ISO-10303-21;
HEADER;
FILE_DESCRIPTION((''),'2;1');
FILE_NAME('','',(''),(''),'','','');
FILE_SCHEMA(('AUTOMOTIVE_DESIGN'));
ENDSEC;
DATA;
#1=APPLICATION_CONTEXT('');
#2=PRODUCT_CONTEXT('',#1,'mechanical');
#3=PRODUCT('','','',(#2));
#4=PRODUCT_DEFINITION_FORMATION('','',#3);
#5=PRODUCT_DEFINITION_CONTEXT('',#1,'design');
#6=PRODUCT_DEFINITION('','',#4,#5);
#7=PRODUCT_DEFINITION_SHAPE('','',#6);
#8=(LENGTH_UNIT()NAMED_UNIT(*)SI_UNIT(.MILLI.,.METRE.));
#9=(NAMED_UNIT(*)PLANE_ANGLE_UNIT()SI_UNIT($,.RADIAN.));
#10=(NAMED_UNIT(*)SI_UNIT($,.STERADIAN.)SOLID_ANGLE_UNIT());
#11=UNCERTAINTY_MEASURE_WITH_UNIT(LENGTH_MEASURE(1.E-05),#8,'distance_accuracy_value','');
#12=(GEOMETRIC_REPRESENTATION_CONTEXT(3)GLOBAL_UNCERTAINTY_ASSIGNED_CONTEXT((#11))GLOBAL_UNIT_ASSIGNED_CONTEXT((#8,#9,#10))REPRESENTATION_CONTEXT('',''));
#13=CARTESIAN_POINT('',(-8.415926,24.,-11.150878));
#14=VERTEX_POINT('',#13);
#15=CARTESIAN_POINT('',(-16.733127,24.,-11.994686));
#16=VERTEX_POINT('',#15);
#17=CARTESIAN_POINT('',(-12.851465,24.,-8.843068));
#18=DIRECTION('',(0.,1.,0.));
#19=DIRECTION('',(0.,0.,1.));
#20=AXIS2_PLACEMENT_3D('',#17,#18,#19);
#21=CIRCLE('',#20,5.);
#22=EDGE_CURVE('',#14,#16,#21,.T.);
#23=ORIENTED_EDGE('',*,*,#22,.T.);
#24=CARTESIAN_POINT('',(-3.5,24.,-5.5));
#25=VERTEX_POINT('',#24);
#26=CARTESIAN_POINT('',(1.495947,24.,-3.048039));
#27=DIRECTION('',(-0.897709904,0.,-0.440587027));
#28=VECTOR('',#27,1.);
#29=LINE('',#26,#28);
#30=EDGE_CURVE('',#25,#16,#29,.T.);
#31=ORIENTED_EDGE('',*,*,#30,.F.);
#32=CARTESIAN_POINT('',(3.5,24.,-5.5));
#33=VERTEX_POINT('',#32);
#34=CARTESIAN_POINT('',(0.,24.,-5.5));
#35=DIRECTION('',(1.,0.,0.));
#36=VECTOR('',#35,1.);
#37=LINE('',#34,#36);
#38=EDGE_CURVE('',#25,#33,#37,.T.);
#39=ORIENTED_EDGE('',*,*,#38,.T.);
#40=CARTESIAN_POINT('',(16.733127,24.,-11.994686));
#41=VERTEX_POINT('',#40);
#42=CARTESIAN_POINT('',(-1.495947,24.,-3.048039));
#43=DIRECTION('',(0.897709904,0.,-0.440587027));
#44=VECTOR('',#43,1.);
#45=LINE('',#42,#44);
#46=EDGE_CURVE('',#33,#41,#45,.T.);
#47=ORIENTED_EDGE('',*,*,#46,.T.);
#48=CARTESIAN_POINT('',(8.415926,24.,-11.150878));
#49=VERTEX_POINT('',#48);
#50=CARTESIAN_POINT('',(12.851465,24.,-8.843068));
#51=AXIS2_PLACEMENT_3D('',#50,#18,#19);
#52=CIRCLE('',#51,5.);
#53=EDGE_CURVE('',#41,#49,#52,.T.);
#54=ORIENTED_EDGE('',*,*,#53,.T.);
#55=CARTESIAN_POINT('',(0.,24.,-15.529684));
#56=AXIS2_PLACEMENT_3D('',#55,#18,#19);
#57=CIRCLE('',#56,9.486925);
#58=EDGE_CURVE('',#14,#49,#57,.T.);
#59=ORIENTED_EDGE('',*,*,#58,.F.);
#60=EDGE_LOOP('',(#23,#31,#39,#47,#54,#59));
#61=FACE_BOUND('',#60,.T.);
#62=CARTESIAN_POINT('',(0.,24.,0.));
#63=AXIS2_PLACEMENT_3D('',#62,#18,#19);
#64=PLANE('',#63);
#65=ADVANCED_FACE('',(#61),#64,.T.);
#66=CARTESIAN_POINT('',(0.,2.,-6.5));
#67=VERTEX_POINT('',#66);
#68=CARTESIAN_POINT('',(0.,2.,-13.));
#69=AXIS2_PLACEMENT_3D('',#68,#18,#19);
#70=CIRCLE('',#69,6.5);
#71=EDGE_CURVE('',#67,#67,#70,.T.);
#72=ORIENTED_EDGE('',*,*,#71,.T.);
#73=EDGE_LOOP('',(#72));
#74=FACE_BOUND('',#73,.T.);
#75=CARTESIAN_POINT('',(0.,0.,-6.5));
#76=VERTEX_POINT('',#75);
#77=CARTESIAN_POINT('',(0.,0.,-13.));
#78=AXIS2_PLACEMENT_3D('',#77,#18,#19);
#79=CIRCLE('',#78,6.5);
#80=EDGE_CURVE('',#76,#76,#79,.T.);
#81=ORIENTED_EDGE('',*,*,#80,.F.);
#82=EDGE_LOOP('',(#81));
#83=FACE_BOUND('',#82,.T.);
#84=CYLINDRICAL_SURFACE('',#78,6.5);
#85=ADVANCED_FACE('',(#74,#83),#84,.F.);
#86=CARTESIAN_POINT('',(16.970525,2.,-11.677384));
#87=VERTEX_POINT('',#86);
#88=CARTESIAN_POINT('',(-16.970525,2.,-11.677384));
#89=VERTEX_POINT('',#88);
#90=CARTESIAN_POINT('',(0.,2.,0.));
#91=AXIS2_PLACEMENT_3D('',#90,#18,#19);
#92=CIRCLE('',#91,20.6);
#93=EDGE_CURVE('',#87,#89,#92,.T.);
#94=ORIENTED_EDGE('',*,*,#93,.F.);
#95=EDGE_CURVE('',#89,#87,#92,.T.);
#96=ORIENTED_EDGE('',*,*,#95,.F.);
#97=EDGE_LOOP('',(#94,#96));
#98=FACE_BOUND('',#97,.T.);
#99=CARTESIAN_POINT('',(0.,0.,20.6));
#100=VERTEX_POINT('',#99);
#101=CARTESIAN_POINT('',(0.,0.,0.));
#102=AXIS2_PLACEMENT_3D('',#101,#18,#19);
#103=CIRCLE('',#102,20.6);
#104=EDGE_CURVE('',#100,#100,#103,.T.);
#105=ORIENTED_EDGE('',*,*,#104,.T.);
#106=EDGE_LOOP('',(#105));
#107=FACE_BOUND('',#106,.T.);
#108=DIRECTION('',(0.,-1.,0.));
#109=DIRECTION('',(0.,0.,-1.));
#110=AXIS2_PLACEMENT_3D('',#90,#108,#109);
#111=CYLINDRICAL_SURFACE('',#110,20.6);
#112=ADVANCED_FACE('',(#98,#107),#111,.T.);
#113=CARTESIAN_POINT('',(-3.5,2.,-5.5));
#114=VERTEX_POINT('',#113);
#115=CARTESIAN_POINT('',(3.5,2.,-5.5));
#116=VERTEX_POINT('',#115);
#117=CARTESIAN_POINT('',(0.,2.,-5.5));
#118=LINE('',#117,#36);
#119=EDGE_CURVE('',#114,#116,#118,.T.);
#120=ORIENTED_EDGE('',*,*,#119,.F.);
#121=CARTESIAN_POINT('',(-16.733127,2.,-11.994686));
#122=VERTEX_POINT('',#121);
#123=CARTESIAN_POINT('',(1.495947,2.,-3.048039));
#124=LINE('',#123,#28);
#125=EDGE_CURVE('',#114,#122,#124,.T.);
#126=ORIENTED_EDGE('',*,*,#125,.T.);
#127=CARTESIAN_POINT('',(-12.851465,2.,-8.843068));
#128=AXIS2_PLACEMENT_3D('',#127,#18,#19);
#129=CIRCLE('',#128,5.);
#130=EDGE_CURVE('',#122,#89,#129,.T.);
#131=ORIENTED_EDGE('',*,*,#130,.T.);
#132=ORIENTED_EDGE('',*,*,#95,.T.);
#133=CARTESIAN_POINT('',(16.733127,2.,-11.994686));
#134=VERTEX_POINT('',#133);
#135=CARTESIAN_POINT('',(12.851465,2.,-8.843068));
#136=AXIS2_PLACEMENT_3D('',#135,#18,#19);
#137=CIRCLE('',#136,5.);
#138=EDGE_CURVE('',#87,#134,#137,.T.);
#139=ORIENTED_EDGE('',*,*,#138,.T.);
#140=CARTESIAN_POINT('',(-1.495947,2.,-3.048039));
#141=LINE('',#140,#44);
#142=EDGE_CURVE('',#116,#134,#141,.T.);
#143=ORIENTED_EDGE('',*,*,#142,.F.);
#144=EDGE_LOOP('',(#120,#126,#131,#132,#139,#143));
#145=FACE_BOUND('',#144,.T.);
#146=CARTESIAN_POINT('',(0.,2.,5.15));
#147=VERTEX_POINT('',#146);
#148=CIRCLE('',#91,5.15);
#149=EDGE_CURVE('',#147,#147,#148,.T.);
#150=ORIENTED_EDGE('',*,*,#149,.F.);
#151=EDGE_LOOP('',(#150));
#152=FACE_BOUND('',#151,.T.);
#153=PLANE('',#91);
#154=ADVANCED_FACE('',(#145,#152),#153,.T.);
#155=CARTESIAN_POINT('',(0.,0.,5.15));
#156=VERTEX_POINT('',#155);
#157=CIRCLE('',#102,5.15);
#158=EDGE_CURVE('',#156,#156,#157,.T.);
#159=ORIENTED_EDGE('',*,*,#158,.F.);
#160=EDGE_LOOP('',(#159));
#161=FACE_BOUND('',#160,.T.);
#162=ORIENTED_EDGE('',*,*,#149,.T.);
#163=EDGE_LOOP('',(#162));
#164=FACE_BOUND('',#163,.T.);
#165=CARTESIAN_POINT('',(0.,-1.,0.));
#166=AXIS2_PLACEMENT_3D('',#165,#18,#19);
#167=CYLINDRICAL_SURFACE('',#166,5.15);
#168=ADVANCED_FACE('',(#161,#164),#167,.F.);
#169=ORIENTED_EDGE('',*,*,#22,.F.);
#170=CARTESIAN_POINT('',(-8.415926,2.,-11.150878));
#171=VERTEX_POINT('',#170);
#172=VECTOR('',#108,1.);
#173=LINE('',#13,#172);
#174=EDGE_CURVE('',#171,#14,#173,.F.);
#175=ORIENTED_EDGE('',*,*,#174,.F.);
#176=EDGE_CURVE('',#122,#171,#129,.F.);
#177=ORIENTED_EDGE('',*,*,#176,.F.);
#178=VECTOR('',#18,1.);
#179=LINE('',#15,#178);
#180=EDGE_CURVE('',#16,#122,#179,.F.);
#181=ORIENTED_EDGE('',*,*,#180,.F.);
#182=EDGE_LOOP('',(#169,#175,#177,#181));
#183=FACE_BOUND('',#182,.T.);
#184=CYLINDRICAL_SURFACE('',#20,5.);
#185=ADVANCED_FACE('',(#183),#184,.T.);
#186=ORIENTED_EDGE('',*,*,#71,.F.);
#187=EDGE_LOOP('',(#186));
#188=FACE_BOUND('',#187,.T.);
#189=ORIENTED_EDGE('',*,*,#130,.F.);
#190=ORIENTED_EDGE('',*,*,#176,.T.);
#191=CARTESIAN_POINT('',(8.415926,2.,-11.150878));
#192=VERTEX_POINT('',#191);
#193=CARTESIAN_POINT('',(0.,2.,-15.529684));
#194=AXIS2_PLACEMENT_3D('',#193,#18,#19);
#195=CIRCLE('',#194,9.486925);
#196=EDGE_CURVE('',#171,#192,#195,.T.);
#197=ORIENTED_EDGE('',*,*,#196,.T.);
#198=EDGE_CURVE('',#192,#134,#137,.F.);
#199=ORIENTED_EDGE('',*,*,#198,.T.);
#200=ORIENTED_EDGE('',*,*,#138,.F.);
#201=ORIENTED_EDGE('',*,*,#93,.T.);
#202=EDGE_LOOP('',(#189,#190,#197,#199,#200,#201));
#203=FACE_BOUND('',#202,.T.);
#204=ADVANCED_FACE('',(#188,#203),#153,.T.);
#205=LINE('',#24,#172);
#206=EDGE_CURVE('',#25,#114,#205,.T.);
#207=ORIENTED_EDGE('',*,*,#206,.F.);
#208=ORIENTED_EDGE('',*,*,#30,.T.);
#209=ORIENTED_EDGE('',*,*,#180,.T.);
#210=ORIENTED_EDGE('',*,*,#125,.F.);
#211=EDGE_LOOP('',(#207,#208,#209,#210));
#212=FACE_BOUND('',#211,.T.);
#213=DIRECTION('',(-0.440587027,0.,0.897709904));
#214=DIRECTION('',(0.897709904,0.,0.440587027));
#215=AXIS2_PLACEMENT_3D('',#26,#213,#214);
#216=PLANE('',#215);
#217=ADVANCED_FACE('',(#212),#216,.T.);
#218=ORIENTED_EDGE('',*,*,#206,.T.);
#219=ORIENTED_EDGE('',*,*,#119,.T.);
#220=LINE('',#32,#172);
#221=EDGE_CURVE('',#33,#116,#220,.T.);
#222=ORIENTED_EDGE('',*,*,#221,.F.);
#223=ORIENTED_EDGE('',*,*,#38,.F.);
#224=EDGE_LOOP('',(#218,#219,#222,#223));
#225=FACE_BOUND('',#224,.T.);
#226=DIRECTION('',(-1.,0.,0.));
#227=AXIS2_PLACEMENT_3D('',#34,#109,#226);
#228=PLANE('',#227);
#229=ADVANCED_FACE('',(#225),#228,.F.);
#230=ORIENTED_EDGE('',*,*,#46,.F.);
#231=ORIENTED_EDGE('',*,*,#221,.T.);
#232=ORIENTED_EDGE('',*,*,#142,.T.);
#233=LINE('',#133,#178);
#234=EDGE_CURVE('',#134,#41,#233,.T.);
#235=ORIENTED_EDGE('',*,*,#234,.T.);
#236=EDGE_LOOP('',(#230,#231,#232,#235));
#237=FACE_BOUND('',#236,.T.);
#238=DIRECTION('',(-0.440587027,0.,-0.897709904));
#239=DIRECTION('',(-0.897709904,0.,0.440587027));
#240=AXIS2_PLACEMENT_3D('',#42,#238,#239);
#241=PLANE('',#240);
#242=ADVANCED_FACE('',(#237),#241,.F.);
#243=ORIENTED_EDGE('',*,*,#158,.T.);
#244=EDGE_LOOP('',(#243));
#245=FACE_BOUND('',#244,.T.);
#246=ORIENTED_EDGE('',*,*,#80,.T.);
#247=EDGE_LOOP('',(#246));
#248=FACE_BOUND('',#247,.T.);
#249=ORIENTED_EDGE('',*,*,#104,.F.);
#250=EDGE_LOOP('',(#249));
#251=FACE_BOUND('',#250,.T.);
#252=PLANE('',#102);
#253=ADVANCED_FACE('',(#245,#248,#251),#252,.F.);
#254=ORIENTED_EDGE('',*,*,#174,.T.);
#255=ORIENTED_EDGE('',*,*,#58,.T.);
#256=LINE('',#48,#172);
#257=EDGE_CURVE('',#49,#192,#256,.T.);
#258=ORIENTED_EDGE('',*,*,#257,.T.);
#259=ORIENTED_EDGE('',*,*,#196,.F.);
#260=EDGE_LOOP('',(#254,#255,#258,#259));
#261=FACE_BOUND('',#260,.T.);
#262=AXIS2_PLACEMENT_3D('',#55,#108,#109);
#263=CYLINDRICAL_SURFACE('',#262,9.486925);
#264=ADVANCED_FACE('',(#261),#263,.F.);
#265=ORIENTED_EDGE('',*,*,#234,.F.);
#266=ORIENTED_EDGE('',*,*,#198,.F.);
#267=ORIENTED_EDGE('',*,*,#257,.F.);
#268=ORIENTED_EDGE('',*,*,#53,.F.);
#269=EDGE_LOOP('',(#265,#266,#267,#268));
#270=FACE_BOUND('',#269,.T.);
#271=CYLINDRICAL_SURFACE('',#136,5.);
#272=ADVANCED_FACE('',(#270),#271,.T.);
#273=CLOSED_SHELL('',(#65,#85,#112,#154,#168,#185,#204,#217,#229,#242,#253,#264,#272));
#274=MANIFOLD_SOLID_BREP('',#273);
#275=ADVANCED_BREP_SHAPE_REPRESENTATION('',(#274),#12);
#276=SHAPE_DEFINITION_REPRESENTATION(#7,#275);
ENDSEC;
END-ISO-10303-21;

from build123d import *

# Parameters (mm, degrees)
SKETCH1_R           = 20.6
BOSS_EXTRUDE1_DEPTH = 2
SKETCH2_R           = 5.15
CUT_EXTRUDE1_DEPTH  = 3
SKETCH3_R           = 6.5
CUT_EXTRUDE2_DEPTH  = 2
BOSS_EXTRUDE4_DEPTH = 22
FILLET1_R           = 5


with BuildPart() as part:
    # Sketch1 → Boss-Extrude1 (new body)
    with BuildSketch(Plane(origin=(0, 0, 0), x_dir=(1, 0, 0), z_dir=(0, 1, 0))):
        with Locations(Location((0, 0, 0), (0, 0, 270))):
            Circle(SKETCH1_R)
    extrude(amount=BOSS_EXTRUDE1_DEPTH)

    # Sketch2 → Cut-Extrude1 (cut)
    with BuildSketch(Plane(origin=(0, 2, 0), x_dir=(1, 0, 0), z_dir=(0, 1, 0))):
        with Locations(Location((0, 0, 0), (0, 0, 270))):
            Circle(SKETCH2_R)
    extrude(amount=-CUT_EXTRUDE1_DEPTH, mode=Mode.SUBTRACT)

    # Sketch3 → Cut-Extrude2 (cut)
    with BuildSketch(Plane(origin=(0, 2, 0), x_dir=(1, 0, 0), z_dir=(0, 1, 0))):
        with Locations(Location((0, 13, 0), (0, 0, 270))):
            Circle(SKETCH3_R)
    extrude(amount=-CUT_EXTRUDE2_DEPTH, mode=Mode.SUBTRACT)

    # Sketch4 → Boss-Extrude4 (add)
    with BuildSketch(Plane(origin=(0, 2, 0), x_dir=(1, 0, 0), z_dir=(0, 1, 0))):
        with BuildLine():
            Line((-16.743954133, 12), (-3.5, 5.5))
            Line((-3.5, 5.5), (3.5, 5.5))
            Line((3.5, 5.5), (16.743954133, 12))
            ThreePointArc((16.743954133, 12), (13.279606143, 15.748398671), (9, 18.529975715))
            ThreePointArc((9, 18.529975715), (0, 6.042759079), (-9, 18.529975715))
            ThreePointArc((-9, 18.529975715), (-13.279606143, 15.748398671), (-16.743954133, 12))
        make_face()
    extrude(amount=BOSS_EXTRUDE4_DEPTH)

    # Fillet1
    # the kernel refuses this fillet: 5 mm, written as the material it takes off along each edge
    with BuildSketch(Plane(origin=(-9, 2, -18.529975715), x_dir=(-0.7582820448894503, 0, 0.6519266372823508), z_dir=(0, 1, 0))) as fillet1_piece_1:
        with BuildLine():
            CenterArc((9.235650387, 4.834535828), FILLET1_R, 166.800937992, 117.98025937)
            ThreePointArc((4.367737182, 5.976210486), (2.790781466, 2.544540557), (0, 0))
            ThreePointArc((0, 0), (5.255646353, -0.681712388), (10.511292706, 0))
        make_face()
    extrude(amount=48.278231764, mode=Mode.SUBTRACT)
    with BuildSketch(Plane(origin=(9, 2, -18.529975715), x_dir=(0.7582820448894505, 0, 0.6519266372823505), z_dir=(0, 1, 0))) as fillet1_piece_2:
        with BuildLine():
            CenterArc((9.235650387, -4.834535828), FILLET1_R, 75.218802639, 117.98025937)
            ThreePointArc((4.367737182, -5.976210486), (2.790781466, -2.544540557), (0, 0))
            ThreePointArc((0, 0), (5.255646353, 0.681712388), (10.511292706, 0))
        make_face()
    extrude(amount=48.278231764, mode=Mode.SUBTRACT)


solid = part.part
